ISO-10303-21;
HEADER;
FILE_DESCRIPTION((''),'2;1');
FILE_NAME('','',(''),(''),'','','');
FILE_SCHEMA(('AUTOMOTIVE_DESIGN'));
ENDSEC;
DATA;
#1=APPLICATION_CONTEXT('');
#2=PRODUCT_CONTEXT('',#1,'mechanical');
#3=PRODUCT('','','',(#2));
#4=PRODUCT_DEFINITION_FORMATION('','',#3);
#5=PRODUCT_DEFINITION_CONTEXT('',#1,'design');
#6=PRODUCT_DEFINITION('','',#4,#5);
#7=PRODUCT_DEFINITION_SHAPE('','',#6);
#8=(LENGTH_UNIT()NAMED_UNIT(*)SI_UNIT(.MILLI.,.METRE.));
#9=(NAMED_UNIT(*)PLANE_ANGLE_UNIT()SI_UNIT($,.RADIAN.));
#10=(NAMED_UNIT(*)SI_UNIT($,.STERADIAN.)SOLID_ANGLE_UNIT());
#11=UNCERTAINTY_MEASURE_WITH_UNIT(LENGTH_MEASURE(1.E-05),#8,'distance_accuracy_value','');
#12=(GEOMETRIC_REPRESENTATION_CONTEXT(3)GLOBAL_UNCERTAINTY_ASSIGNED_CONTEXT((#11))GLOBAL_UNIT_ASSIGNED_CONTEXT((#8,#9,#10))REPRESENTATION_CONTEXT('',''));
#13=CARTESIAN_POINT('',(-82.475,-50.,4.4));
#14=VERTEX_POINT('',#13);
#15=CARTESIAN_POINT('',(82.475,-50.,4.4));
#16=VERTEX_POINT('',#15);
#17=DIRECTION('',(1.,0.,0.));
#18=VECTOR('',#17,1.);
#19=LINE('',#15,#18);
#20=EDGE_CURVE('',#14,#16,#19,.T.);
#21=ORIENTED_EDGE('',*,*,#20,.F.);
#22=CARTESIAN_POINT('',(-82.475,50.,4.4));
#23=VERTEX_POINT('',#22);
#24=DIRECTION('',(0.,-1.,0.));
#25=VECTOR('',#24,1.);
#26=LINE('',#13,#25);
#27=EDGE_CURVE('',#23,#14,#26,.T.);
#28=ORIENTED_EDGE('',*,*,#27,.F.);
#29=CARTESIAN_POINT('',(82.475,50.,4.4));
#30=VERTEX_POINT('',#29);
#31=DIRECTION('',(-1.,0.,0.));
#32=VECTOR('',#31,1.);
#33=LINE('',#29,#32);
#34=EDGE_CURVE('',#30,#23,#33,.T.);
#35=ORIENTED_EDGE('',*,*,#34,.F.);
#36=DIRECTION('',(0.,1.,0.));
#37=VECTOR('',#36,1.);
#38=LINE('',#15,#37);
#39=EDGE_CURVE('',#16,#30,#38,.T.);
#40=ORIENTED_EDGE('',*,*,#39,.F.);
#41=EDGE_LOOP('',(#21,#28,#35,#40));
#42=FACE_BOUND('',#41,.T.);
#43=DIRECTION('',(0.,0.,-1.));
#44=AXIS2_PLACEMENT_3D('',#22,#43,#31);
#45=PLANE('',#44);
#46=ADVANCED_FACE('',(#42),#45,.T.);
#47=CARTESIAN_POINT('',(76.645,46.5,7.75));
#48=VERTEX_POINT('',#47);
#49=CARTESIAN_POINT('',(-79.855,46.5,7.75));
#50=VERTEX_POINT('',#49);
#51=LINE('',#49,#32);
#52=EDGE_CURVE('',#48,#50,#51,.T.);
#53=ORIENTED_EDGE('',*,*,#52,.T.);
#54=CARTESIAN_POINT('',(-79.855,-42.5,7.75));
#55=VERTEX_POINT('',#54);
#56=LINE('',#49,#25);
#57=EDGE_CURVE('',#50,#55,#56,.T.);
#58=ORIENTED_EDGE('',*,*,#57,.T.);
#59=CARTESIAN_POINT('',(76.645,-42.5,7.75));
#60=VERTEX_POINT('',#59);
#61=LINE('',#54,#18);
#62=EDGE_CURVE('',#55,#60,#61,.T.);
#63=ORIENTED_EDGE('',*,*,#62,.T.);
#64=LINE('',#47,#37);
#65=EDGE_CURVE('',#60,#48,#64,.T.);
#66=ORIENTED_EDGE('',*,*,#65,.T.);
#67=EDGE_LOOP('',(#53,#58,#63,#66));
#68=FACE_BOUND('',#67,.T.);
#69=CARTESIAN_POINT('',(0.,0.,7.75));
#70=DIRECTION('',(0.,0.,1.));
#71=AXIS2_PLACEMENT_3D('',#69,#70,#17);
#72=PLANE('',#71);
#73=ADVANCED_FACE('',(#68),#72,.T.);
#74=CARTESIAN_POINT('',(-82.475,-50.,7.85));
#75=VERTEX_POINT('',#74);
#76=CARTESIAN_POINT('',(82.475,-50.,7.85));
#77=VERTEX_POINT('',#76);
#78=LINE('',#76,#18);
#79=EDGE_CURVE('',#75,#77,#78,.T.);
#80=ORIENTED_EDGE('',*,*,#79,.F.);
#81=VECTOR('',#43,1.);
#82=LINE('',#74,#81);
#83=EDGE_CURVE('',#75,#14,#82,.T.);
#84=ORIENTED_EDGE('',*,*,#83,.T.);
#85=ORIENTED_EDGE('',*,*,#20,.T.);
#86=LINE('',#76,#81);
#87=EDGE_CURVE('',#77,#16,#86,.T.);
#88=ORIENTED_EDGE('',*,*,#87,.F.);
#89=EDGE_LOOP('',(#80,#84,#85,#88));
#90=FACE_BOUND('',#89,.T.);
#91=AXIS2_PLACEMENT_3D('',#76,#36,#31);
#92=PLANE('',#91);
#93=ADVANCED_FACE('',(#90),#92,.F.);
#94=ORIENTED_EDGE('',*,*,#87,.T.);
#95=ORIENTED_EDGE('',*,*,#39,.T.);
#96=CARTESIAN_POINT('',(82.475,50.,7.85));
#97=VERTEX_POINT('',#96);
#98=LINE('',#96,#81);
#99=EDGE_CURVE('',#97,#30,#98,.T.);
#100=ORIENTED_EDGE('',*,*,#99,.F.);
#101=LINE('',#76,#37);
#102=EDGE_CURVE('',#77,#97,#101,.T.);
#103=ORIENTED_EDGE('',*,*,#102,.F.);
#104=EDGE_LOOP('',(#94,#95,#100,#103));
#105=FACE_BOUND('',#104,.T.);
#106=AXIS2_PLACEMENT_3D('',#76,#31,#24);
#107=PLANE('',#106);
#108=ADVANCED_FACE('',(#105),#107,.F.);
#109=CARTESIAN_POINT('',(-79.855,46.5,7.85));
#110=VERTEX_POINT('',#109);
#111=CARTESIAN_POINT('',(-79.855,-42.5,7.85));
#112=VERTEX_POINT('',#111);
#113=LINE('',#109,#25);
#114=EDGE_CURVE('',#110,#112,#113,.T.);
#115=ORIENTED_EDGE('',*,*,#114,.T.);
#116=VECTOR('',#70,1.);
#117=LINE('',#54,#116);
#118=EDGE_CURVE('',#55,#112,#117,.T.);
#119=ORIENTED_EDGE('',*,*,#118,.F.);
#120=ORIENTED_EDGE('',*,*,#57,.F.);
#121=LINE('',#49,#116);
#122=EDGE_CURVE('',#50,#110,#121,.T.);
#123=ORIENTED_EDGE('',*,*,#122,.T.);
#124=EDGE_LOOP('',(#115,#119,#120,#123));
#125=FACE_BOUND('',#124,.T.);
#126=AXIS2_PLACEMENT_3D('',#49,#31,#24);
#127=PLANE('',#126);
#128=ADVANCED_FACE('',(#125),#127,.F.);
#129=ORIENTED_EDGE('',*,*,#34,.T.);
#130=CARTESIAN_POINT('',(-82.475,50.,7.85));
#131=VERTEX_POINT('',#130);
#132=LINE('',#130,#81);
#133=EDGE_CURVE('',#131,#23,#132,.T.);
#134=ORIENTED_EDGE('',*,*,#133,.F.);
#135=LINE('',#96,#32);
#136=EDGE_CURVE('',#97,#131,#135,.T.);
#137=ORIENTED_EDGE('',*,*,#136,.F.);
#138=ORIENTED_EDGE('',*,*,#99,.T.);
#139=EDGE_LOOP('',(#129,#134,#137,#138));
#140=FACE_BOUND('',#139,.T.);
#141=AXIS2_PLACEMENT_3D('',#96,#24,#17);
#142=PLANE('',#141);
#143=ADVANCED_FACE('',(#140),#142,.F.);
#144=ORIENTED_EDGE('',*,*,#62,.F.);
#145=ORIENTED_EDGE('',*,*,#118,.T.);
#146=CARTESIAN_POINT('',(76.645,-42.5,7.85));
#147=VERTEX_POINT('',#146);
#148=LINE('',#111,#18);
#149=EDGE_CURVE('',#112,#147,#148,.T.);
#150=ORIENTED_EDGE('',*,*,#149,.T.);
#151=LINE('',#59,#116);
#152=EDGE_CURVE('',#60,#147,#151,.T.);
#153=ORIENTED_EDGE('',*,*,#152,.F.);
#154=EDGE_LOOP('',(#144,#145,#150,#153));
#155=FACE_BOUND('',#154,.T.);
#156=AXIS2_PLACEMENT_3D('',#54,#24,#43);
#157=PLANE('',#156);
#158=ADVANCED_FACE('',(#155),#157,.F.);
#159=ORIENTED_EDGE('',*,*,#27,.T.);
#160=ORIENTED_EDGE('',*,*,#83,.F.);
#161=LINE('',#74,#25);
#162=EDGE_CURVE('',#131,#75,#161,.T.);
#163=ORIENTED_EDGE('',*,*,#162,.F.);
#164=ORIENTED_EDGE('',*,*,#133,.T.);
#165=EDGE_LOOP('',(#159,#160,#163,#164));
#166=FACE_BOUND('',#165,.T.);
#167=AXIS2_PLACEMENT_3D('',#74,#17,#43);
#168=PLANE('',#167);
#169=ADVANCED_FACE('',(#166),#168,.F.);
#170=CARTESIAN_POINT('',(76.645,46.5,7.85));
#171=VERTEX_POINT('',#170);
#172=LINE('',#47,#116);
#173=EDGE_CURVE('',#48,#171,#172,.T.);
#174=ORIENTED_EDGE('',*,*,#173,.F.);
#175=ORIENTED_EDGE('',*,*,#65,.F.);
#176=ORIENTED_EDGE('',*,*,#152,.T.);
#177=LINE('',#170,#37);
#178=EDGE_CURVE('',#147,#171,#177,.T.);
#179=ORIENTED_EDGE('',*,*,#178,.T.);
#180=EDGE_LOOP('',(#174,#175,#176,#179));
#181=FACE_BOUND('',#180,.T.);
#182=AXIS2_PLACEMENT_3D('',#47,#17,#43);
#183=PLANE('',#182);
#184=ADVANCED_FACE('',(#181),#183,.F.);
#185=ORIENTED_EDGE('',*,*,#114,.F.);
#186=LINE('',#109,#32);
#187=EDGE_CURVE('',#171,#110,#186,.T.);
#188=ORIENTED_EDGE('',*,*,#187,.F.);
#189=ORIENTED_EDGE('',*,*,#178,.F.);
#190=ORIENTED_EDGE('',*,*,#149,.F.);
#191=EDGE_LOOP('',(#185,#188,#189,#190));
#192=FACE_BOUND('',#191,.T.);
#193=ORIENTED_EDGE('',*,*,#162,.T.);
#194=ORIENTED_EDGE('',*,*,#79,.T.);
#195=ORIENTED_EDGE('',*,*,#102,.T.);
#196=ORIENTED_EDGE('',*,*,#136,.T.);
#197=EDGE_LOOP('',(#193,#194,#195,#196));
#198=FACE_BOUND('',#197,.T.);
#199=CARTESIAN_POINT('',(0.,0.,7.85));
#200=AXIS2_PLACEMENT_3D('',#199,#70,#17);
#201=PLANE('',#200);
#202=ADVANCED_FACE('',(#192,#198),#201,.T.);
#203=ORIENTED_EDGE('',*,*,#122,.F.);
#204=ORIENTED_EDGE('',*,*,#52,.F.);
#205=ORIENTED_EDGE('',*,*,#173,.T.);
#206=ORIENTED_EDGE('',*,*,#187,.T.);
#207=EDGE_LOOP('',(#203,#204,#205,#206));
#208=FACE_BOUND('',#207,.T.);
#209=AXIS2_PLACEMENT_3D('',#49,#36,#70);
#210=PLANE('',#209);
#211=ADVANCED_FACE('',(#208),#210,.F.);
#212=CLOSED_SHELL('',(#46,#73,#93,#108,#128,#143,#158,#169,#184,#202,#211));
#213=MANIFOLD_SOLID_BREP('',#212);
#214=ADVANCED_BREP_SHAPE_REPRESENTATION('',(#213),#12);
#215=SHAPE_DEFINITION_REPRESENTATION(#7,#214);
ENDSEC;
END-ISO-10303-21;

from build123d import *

# Parameters (mm, degrees)
ESQUISSE1_R             = 1.524
BOSS_EXTRU_1_DEPTH      = 2.1
ESQUISSE2_W             = 25.4
ESQUISSE2_H             = 25.4
BOSS_EXTRU_2_DEPTH      = 2.3
ESQUISSE3_W             = 164.95
ESQUISSE3_H             = 100
BOSS_EXTRU_3_DEPTH      = 3.45
ESQUISSE4_W             = 156.5
ESQUISSE4_H             = 89
ENL_V_MAT_EXTRU_1_DEPTH = 0.1
ESQUISSE5_W             = 29.8
ESQUISSE5_H             = 7.4
ENL_V_MAT_EXTRU_2_DEPTH = 2.1
CONG_1_R                = 1
ESQUISSE6_W             = 26.5
ESQUISSE6_H             = 5.4
BOSS_EXTRU_4_DEPTH      = 2
ESQUISSE7_W             = 11.59
ESQUISSE7_H             = 15
BOSS_EXTRU_5_DEPTH      = 6.16
ESQUISSE8_W             = 5.5
ESQUISSE8_H             = 7.88
BOSS_EXTRU_6_DEPTH      = 2.8
ESQUISSE9_W             = 13.84
ESQUISSE9_H             = 13.84
BOSS_EXTRU_7_DEPTH      = 1
BOSS_EXTRU_8_DEPTH      = 0.1
BOSS_EXTRU_8_DEPTH_BACK = 2.11
ESQUISSE10_R            = 3.175
ESQUISSE10_R_2          = 1.524


with BuildPart() as part:
    # Esquisse1 → Boss.-Extru.1 (new body)
    with BuildSketch(Plane.XY):
        with BuildLine():
            Line((-82.615, 53.25), (-82.615, -53.25))
            ThreePointArc((-82.615, -53.25), (-78.613, -57.252), (-74.611, -53.25))
            Line((-74.611, -53.25), (-74.611, -50.036793886))
            Line((-74.611, -50.036793886), (74.611, -50.036793886))
            Line((74.611, -50.036793886), (74.611, -53.25))
            ThreePointArc((74.611, -53.25), (78.613, -57.252), (82.615, -53.25))
            Line((82.615, -53.25), (82.615, 53.25))
            ThreePointArc((82.615, 53.25), (78.613, 57.252), (74.611, 53.25))
            Line((74.611, 53.25), (74.611, 50.036793886))
            Line((74.611, 50.036793886), (-74.611, 50.036793886))
            Line((-74.611, 50.036793886), (-74.611, 53.25))
            ThreePointArc((-74.611, 53.25), (-78.613, 57.252), (-82.615, 53.25))
        make_face()
        with Locations((-78.613, 53.25)):
            Circle(ESQUISSE1_R, mode=Mode.SUBTRACT)
        with Locations((-78.613, -53.25)):
            Circle(ESQUISSE1_R, mode=Mode.SUBTRACT)
        with Locations((78.613, -53.25)):
            Circle(ESQUISSE1_R, mode=Mode.SUBTRACT)
        with Locations((78.613, 53.25)):
            Circle(ESQUISSE1_R, mode=Mode.SUBTRACT)
    extrude(amount=BOSS_EXTRU_1_DEPTH)

    # Esquisse2 → Boss.-Extru.2 (add)
    with BuildSketch(Plane.XY.offset(2.1)):
        with Locations((-61.8, 27.3)):
            Rectangle(ESQUISSE2_W, ESQUISSE2_H)
        with Locations((-61.8, -27.3)):
            Rectangle(ESQUISSE2_W, ESQUISSE2_H)
        with Locations((61.8, 27.3)):
            Rectangle(ESQUISSE2_W, ESQUISSE2_H)
        with Locations((61.8, -27.3)):
            Rectangle(ESQUISSE2_W, ESQUISSE2_H)
    extrude(amount=BOSS_EXTRU_2_DEPTH)

    # Esquisse3 → Boss.-Extru.3 (add)
    with BuildSketch(Plane.XY.offset(4.4)):
        Rectangle(ESQUISSE3_W, ESQUISSE3_H)
    extrude(amount=BOSS_EXTRU_3_DEPTH)

    # Esquisse4 → Enlèv. mat.-Extru.1 (cut)
    with BuildSketch(Plane.XY.offset(7.85)):
        with Locations((-1.605, 2)):
            Rectangle(ESQUISSE4_W, ESQUISSE4_H)
    extrude(amount=-ENL_V_MAT_EXTRU_1_DEPTH, mode=Mode.SUBTRACT)

    # Esquisse5 → Enlèv. mat.-Extru.2 (cut)
    with BuildSketch(Plane(origin=(0, 0, 0), x_dir=(-1, 0, 0), z_dir=(0, 0, -1))):
        with Locations((38.315, -0.136793886)):
            Rectangle(ESQUISSE5_W, ESQUISSE5_H)
    extrude(amount=-ENL_V_MAT_EXTRU_2_DEPTH, mode=Mode.SUBTRACT)

    # Congé1
    cong_1_edges = [part.edges().sort_by_distance(p)[0] for p in [
        (-23.415, 3.563206114, 1.05),
        (-23.415, -3.836793886, 1.05),
        (-53.215, -3.836793886, 1.05),
        (-53.215, 3.563206114, 1.05),
    ]]
    fillet(cong_1_edges, radius=CONG_1_R)

    # Esquisse6 → Boss.-Extru.4 (add)
    with BuildSketch(Plane(origin=(0, 0, 0), x_dir=(-1, 0, 0), z_dir=(0, 0, -1))):
        with Locations((38.315, 6.363206114)):
            Rectangle(ESQUISSE6_W, ESQUISSE6_H)
    extrude(amount=BOSS_EXTRU_4_DEPTH)

    # Esquisse7 → Boss.-Extru.5 (add)
    with BuildSketch(Plane(origin=(0, 0, 0), x_dir=(-1, 0, 0), z_dir=(0, 0, -1))):
        with Locations((-79.02, 1.017206114)):
            Rectangle(ESQUISSE7_W, ESQUISSE7_H)
    extrude(amount=BOSS_EXTRU_5_DEPTH)

    # Esquisse8 → Boss.-Extru.6 (add)
    with BuildSketch(Plane(origin=(0, 0, 0), x_dir=(-1, 0, 0), z_dir=(0, 0, -1))):
        with Locations((-80.665, -20.318793886)):
            Rectangle(ESQUISSE8_W, ESQUISSE8_H)
    extrude(amount=BOSS_EXTRU_6_DEPTH)

    # Esquisse9 → Boss.-Extru.7 (add)
    with BuildSketch(Plane(origin=(0, 0, 0), x_dir=(-1, 0, 0), z_dir=(0, 0, -1))):
        with Locations((-52.695, 0.616793886)):
            Rectangle(ESQUISSE9_W, ESQUISSE9_H)
    extrude(amount=BOSS_EXTRU_7_DEPTH)

    # Esquisse10 → Boss.-Extru.8 (add, two sides: drawn at the far end of the back side and taken through both)
    # profile 1 of 4: a face of its own
    with BuildSketch(Plane.XY.offset(2.1).offset(-BOSS_EXTRU_8_DEPTH_BACK)):
        with Locations((-78.613, 53.25)):
            Circle(ESQUISSE10_R)
        with Locations((-78.613, 53.25)):
            Circle(ESQUISSE10_R_2, mode=Mode.SUBTRACT)
    # profile 2 of 4: a face of its own
    with BuildSketch(Plane.XY.offset(2.1).offset(-BOSS_EXTRU_8_DEPTH_BACK)):
        with Locations((-78.613, -53.25)):
            Circle(ESQUISSE10_R)
        with Locations((-78.613, -53.25)):
            Circle(ESQUISSE10_R_2, mode=Mode.SUBTRACT)
    # profile 3 of 4: a face of its own
    with BuildSketch(Plane.XY.offset(2.1).offset(-BOSS_EXTRU_8_DEPTH_BACK)):
        with Locations((78.613, -53.25)):
            Circle(ESQUISSE10_R)
        with Locations((78.613, -53.25)):
            Circle(ESQUISSE10_R_2, mode=Mode.SUBTRACT)
    # profile 4 of 4: a face of its own
    with BuildSketch(Plane.XY.offset(2.1).offset(-BOSS_EXTRU_8_DEPTH_BACK)):
        with Locations((78.613, 53.25)):
            Circle(ESQUISSE10_R)
        with Locations((78.613, 53.25)):
            Circle(ESQUISSE10_R_2, mode=Mode.SUBTRACT)
    extrude(amount=BOSS_EXTRU_8_DEPTH + BOSS_EXTRU_8_DEPTH_BACK)

    # Split1
    split(bisect_by=Plane.XY.offset(4.4), keep=Keep.TOP)


solid = part.part
